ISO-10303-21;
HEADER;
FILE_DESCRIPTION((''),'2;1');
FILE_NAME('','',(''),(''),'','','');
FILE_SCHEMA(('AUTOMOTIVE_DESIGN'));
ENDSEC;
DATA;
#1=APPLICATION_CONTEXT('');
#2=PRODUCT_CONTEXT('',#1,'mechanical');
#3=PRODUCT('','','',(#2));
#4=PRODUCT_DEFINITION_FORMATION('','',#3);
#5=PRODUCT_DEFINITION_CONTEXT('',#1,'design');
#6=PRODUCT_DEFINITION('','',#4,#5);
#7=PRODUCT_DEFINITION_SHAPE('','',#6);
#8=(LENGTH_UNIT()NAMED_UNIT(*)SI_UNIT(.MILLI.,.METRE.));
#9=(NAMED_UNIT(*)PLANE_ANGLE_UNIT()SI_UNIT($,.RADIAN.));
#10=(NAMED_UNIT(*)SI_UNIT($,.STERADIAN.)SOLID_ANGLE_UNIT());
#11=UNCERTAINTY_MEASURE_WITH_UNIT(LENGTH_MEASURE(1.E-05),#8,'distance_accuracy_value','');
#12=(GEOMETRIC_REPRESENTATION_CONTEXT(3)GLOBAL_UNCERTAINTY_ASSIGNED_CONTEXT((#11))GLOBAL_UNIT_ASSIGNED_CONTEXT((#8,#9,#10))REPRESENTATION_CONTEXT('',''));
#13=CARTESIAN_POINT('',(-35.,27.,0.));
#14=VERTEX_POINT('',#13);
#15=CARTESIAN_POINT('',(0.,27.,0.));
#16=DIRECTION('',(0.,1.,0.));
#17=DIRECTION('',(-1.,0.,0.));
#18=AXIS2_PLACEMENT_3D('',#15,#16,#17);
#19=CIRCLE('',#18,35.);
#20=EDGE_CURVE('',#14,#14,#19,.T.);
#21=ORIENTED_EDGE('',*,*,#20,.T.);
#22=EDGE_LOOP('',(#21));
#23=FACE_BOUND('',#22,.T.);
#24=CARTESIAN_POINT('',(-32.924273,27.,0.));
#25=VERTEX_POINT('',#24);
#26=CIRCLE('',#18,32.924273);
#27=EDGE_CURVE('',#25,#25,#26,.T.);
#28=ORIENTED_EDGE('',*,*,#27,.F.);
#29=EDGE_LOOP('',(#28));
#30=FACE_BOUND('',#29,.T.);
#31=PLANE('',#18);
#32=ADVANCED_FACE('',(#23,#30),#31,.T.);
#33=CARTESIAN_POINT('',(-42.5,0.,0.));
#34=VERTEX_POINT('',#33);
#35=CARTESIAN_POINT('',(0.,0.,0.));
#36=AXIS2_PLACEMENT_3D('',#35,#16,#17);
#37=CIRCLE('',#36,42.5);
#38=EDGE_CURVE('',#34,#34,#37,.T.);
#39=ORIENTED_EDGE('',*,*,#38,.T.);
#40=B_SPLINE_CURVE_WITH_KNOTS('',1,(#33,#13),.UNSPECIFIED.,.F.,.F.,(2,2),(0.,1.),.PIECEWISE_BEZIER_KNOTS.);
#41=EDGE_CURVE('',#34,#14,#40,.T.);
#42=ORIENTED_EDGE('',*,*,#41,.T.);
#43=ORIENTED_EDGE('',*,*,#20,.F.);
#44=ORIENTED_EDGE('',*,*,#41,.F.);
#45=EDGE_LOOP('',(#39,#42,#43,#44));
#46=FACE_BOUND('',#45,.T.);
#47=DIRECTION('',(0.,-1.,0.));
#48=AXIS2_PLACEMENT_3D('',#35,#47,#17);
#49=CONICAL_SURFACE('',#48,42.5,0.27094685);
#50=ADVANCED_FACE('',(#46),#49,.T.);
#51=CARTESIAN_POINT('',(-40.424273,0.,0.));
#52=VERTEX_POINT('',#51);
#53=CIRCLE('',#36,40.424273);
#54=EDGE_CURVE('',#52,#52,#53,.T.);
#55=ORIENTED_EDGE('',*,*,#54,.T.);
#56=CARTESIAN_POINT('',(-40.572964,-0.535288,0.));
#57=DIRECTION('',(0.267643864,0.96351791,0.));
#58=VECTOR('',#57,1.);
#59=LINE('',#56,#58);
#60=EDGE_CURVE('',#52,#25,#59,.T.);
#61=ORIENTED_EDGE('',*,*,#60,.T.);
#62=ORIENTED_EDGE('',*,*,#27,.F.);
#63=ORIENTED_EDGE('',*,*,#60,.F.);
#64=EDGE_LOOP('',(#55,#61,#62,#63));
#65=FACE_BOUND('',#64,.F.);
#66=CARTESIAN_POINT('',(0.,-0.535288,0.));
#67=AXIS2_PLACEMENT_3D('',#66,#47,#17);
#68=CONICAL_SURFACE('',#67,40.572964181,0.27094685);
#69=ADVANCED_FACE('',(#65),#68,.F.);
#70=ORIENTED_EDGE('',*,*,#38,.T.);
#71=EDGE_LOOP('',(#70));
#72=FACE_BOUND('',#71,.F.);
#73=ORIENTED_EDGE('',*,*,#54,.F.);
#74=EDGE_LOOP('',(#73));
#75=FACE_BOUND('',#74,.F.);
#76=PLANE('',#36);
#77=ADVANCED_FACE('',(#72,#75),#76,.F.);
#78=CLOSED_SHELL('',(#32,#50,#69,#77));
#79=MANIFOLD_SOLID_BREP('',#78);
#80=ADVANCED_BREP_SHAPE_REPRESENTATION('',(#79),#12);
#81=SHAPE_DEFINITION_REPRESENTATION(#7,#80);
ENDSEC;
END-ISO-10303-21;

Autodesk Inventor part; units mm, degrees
ref_plane "YZ Plane" through (0, 0, 0) normal (1, 0, 0) x (0, 1, 0)
ref_plane "XY Plane" through (0, 0, 0) normal (0, 0, 1) x (1, 0, 0)
sketch "Szkic6" plane through (0, 0, 0) normal (0, 1, 0) x (-1, 0, 0)
  circle A0 centre (0, 0) radius 42.5
  dimension "d33" = 85
ref_plane "Płaszczyzna konstrukcyjna1" through (0, 27, 0) normal (0, 1, 0) x (-1, 0, 0)
sketch "Szkic7" plane through (0, 27, 0) normal (0, 1, 0) x (-1, 0, 0)
  circle A0 centre (0, 0) radius 35
  dimension "d35" = 70
loft "Wyciągnięcie złożone1" add profiles "Szkic6", "Szkic7"
shell "Skorupa1" thickness 2 removed faces 2 at (1.9985, 27, 11.019) at (10.6049, 0, 7.3037)
equation "\"d33\" = OD1"
equation "\"d35\" = OD2"
equation "\"d52\" = THK"
equation "\"SzerokośćGięciaPodcięcia\" = Grubość"
equation "\"RozmiarPodcięciaNarożnika\" = 4 * Grubość"
equation "\"PromieńPrzejścia\" = PromieńGięcia"
equation "\"Rozmiar_promienia_Jacobiego\" = PromieńGięcia"
equation "\"Wielk_odstępu\" = Grubość"
equation "\"d2\" = PromieńGięcia"
equation "\"d23\" = PromieńGięcia"
equation "\"OD1\" = 85"
equation "\"OD2\" = 70"
equation "\"L\" = 27"
equation "\"THK\" = 2"
equation "\"d34\" = L"
equation "\"Grubość\" = 1.5"
equation "\"PromieńGięcia\" = 3"
properties part number "Redukcja symetryczna Ø85x70x2 L=27" material "304"
